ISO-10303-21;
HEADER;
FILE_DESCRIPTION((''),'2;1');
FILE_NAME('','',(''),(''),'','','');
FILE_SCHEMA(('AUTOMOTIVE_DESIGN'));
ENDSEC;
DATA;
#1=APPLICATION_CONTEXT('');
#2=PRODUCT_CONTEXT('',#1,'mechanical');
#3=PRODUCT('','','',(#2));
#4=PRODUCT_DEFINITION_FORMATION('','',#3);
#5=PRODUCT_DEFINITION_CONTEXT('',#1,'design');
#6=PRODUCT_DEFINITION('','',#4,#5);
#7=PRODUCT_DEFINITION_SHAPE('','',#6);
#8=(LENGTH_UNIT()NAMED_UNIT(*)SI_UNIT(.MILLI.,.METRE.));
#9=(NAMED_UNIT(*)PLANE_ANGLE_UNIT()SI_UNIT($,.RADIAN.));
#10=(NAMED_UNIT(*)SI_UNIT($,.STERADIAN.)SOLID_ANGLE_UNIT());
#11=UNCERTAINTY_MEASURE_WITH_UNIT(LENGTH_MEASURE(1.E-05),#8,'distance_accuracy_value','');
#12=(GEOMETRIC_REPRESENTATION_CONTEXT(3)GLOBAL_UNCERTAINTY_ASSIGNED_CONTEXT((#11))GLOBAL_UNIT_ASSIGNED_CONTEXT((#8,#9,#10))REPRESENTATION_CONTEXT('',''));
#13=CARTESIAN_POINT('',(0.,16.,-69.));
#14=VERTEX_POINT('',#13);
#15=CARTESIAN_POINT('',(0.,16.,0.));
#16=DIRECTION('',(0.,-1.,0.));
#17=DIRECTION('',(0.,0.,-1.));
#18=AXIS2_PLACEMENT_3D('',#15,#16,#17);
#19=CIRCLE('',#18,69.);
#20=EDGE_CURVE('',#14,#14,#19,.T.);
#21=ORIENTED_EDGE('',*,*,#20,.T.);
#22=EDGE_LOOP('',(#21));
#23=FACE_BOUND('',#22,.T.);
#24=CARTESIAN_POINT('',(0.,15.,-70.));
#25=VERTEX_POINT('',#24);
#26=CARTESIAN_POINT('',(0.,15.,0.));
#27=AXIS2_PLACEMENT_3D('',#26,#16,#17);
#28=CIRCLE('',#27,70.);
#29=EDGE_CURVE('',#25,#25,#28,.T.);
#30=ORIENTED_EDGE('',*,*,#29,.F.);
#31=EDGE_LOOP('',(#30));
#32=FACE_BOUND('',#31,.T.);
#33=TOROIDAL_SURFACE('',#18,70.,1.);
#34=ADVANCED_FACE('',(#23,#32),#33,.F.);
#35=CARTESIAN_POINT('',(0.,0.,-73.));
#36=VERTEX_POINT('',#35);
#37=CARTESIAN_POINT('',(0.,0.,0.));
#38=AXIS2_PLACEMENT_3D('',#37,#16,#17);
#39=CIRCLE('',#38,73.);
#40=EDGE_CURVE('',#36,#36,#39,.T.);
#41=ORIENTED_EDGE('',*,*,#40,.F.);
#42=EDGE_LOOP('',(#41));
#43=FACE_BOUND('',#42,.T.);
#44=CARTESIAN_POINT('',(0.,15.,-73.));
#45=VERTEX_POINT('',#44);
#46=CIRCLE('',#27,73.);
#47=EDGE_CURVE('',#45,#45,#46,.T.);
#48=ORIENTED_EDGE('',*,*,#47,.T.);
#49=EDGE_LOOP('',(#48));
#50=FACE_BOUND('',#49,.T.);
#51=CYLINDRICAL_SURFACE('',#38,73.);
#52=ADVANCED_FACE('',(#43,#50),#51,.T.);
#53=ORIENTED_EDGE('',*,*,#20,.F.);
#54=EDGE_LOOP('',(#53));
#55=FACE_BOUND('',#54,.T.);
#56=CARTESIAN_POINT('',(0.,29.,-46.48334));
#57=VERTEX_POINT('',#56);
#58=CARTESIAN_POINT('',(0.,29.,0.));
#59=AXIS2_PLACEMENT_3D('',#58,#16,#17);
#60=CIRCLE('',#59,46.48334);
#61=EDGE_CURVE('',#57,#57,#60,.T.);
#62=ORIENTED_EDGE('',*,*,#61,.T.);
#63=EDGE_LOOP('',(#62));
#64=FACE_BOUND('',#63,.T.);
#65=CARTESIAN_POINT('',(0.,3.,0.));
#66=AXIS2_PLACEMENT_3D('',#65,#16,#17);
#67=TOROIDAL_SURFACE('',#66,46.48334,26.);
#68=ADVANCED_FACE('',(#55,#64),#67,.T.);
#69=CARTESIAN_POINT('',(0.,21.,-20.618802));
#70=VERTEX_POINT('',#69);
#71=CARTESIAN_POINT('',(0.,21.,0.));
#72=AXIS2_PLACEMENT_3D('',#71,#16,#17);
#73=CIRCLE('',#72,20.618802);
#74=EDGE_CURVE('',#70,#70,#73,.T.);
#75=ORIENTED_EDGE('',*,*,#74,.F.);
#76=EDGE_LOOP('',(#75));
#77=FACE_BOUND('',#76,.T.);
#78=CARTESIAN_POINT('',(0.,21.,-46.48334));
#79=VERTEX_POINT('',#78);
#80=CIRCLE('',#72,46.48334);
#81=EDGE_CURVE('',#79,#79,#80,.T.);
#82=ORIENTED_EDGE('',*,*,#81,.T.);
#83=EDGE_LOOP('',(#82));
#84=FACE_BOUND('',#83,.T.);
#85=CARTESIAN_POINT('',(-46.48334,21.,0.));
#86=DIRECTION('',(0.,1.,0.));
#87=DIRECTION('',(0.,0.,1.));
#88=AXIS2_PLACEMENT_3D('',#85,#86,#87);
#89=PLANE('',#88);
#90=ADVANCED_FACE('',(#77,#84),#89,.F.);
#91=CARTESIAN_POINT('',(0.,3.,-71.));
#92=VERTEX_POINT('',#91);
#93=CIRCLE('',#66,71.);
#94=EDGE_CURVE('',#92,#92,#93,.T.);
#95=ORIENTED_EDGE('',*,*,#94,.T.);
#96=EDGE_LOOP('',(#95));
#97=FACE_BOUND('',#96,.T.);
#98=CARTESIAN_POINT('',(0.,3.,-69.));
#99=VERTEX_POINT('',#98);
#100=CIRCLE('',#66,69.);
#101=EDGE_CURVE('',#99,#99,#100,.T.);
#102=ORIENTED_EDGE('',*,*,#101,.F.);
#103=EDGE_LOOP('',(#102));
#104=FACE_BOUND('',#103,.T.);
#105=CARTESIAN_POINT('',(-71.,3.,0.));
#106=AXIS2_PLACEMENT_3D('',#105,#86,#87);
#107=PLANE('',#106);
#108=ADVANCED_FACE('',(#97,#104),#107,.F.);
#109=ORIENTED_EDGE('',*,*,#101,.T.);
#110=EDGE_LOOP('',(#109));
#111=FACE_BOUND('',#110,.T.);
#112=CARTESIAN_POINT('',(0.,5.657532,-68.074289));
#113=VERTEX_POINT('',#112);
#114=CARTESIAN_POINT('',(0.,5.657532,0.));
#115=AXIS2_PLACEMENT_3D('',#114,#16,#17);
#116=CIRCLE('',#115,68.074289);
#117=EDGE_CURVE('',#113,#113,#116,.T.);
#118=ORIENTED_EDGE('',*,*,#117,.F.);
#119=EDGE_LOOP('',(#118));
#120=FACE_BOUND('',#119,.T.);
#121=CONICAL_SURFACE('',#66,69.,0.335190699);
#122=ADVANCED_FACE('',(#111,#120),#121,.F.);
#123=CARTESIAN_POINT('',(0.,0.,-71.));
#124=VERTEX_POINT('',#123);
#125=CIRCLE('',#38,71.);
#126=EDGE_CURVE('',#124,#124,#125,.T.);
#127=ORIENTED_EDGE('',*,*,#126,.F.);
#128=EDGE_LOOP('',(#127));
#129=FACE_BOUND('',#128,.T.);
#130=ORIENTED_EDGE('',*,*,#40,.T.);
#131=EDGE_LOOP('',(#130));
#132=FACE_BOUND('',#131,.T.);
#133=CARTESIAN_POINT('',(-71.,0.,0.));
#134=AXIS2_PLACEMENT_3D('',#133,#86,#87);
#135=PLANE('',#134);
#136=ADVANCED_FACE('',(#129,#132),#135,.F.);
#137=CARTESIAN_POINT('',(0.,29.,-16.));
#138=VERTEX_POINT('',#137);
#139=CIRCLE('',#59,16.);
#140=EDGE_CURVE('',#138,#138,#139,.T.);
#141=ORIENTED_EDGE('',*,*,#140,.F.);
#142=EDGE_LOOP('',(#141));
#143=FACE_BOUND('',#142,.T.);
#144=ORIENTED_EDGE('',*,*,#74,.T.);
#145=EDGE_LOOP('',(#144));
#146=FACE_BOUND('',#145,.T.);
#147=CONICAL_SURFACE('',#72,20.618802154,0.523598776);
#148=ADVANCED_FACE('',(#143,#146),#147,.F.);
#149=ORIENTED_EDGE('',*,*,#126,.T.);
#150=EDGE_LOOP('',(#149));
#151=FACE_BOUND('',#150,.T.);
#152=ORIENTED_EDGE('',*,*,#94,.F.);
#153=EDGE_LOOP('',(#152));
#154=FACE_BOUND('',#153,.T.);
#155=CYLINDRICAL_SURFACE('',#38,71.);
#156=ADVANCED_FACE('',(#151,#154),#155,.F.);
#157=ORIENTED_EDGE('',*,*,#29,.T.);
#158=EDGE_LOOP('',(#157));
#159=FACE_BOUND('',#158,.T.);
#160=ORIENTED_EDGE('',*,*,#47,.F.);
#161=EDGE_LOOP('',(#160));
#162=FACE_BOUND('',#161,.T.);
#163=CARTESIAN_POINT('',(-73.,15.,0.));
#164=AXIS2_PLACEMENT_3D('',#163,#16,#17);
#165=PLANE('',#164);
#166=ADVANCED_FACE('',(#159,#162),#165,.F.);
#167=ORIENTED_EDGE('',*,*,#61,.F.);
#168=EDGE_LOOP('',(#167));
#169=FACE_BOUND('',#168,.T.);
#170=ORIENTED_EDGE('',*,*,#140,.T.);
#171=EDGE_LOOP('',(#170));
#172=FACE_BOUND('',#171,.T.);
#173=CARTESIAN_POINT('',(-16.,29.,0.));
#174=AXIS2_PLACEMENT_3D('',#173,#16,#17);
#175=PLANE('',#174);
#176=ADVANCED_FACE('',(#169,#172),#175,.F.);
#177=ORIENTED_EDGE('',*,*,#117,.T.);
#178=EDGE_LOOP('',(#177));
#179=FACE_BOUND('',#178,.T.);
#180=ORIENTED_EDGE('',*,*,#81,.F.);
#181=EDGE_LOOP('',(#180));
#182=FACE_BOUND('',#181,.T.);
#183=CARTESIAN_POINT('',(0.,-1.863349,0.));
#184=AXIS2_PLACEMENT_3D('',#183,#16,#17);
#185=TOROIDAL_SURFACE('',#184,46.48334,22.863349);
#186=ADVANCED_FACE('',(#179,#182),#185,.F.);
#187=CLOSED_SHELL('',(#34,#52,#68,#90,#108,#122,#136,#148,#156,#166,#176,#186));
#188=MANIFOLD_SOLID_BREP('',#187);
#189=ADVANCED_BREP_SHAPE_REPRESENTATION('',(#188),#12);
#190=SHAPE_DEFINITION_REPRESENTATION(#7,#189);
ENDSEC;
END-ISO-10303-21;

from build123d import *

# Parameters (mm, degrees)
RACCORDO1_R = 1


with BuildPart() as part:
    # Schizzo1 → Rivoluzione1 (revolve)
    with BuildSketch(Plane.XY, mode=Mode.PRIVATE) as rivoluzione1_sk:
        with BuildLine():
            Line((-71, 0), (-73, 0))
            Line((-73, 0), (-73, 15))
            Line((-73, 15), (-69, 15))
            Line((-69, 15), (-69, 16))
            ThreePointArc((-69, 16), (-59.483339502, 25.516660498), (-46.483339502, 29))
            Line((-46.483339502, 29), (-16, 29))
            Line((-16, 29), (-20.618802154, 21))
            Line((-20.618802154, 21), (-46.483339502, 21))
            ThreePointArc((-46.483339502, 21), (-59.726832166, 16.773781497), (-68.074288586, 5.657532485))
            Line((-68.074288586, 5.657532485), (-69, 3))
            Line((-69, 3), (-71, 3))
            Line((-71, 3), (-71, 0))
        make_face()
    revolve(rivoluzione1_sk.sketch.rotate(Axis((0, 0, 0), (0, 1, 0)), 270), axis=Axis((0, 0, 0), (0, 1, 0)))

    # Raccordo1
    raccordo1_edges = [part.edges().sort_by_distance(p)[0] for p in [
        (0, 15, 69),
    ]]
    fillet(raccordo1_edges, radius=RACCORDO1_R - 0.0001)  # a hair under: the kernel refuses the full size


solid = part.part
